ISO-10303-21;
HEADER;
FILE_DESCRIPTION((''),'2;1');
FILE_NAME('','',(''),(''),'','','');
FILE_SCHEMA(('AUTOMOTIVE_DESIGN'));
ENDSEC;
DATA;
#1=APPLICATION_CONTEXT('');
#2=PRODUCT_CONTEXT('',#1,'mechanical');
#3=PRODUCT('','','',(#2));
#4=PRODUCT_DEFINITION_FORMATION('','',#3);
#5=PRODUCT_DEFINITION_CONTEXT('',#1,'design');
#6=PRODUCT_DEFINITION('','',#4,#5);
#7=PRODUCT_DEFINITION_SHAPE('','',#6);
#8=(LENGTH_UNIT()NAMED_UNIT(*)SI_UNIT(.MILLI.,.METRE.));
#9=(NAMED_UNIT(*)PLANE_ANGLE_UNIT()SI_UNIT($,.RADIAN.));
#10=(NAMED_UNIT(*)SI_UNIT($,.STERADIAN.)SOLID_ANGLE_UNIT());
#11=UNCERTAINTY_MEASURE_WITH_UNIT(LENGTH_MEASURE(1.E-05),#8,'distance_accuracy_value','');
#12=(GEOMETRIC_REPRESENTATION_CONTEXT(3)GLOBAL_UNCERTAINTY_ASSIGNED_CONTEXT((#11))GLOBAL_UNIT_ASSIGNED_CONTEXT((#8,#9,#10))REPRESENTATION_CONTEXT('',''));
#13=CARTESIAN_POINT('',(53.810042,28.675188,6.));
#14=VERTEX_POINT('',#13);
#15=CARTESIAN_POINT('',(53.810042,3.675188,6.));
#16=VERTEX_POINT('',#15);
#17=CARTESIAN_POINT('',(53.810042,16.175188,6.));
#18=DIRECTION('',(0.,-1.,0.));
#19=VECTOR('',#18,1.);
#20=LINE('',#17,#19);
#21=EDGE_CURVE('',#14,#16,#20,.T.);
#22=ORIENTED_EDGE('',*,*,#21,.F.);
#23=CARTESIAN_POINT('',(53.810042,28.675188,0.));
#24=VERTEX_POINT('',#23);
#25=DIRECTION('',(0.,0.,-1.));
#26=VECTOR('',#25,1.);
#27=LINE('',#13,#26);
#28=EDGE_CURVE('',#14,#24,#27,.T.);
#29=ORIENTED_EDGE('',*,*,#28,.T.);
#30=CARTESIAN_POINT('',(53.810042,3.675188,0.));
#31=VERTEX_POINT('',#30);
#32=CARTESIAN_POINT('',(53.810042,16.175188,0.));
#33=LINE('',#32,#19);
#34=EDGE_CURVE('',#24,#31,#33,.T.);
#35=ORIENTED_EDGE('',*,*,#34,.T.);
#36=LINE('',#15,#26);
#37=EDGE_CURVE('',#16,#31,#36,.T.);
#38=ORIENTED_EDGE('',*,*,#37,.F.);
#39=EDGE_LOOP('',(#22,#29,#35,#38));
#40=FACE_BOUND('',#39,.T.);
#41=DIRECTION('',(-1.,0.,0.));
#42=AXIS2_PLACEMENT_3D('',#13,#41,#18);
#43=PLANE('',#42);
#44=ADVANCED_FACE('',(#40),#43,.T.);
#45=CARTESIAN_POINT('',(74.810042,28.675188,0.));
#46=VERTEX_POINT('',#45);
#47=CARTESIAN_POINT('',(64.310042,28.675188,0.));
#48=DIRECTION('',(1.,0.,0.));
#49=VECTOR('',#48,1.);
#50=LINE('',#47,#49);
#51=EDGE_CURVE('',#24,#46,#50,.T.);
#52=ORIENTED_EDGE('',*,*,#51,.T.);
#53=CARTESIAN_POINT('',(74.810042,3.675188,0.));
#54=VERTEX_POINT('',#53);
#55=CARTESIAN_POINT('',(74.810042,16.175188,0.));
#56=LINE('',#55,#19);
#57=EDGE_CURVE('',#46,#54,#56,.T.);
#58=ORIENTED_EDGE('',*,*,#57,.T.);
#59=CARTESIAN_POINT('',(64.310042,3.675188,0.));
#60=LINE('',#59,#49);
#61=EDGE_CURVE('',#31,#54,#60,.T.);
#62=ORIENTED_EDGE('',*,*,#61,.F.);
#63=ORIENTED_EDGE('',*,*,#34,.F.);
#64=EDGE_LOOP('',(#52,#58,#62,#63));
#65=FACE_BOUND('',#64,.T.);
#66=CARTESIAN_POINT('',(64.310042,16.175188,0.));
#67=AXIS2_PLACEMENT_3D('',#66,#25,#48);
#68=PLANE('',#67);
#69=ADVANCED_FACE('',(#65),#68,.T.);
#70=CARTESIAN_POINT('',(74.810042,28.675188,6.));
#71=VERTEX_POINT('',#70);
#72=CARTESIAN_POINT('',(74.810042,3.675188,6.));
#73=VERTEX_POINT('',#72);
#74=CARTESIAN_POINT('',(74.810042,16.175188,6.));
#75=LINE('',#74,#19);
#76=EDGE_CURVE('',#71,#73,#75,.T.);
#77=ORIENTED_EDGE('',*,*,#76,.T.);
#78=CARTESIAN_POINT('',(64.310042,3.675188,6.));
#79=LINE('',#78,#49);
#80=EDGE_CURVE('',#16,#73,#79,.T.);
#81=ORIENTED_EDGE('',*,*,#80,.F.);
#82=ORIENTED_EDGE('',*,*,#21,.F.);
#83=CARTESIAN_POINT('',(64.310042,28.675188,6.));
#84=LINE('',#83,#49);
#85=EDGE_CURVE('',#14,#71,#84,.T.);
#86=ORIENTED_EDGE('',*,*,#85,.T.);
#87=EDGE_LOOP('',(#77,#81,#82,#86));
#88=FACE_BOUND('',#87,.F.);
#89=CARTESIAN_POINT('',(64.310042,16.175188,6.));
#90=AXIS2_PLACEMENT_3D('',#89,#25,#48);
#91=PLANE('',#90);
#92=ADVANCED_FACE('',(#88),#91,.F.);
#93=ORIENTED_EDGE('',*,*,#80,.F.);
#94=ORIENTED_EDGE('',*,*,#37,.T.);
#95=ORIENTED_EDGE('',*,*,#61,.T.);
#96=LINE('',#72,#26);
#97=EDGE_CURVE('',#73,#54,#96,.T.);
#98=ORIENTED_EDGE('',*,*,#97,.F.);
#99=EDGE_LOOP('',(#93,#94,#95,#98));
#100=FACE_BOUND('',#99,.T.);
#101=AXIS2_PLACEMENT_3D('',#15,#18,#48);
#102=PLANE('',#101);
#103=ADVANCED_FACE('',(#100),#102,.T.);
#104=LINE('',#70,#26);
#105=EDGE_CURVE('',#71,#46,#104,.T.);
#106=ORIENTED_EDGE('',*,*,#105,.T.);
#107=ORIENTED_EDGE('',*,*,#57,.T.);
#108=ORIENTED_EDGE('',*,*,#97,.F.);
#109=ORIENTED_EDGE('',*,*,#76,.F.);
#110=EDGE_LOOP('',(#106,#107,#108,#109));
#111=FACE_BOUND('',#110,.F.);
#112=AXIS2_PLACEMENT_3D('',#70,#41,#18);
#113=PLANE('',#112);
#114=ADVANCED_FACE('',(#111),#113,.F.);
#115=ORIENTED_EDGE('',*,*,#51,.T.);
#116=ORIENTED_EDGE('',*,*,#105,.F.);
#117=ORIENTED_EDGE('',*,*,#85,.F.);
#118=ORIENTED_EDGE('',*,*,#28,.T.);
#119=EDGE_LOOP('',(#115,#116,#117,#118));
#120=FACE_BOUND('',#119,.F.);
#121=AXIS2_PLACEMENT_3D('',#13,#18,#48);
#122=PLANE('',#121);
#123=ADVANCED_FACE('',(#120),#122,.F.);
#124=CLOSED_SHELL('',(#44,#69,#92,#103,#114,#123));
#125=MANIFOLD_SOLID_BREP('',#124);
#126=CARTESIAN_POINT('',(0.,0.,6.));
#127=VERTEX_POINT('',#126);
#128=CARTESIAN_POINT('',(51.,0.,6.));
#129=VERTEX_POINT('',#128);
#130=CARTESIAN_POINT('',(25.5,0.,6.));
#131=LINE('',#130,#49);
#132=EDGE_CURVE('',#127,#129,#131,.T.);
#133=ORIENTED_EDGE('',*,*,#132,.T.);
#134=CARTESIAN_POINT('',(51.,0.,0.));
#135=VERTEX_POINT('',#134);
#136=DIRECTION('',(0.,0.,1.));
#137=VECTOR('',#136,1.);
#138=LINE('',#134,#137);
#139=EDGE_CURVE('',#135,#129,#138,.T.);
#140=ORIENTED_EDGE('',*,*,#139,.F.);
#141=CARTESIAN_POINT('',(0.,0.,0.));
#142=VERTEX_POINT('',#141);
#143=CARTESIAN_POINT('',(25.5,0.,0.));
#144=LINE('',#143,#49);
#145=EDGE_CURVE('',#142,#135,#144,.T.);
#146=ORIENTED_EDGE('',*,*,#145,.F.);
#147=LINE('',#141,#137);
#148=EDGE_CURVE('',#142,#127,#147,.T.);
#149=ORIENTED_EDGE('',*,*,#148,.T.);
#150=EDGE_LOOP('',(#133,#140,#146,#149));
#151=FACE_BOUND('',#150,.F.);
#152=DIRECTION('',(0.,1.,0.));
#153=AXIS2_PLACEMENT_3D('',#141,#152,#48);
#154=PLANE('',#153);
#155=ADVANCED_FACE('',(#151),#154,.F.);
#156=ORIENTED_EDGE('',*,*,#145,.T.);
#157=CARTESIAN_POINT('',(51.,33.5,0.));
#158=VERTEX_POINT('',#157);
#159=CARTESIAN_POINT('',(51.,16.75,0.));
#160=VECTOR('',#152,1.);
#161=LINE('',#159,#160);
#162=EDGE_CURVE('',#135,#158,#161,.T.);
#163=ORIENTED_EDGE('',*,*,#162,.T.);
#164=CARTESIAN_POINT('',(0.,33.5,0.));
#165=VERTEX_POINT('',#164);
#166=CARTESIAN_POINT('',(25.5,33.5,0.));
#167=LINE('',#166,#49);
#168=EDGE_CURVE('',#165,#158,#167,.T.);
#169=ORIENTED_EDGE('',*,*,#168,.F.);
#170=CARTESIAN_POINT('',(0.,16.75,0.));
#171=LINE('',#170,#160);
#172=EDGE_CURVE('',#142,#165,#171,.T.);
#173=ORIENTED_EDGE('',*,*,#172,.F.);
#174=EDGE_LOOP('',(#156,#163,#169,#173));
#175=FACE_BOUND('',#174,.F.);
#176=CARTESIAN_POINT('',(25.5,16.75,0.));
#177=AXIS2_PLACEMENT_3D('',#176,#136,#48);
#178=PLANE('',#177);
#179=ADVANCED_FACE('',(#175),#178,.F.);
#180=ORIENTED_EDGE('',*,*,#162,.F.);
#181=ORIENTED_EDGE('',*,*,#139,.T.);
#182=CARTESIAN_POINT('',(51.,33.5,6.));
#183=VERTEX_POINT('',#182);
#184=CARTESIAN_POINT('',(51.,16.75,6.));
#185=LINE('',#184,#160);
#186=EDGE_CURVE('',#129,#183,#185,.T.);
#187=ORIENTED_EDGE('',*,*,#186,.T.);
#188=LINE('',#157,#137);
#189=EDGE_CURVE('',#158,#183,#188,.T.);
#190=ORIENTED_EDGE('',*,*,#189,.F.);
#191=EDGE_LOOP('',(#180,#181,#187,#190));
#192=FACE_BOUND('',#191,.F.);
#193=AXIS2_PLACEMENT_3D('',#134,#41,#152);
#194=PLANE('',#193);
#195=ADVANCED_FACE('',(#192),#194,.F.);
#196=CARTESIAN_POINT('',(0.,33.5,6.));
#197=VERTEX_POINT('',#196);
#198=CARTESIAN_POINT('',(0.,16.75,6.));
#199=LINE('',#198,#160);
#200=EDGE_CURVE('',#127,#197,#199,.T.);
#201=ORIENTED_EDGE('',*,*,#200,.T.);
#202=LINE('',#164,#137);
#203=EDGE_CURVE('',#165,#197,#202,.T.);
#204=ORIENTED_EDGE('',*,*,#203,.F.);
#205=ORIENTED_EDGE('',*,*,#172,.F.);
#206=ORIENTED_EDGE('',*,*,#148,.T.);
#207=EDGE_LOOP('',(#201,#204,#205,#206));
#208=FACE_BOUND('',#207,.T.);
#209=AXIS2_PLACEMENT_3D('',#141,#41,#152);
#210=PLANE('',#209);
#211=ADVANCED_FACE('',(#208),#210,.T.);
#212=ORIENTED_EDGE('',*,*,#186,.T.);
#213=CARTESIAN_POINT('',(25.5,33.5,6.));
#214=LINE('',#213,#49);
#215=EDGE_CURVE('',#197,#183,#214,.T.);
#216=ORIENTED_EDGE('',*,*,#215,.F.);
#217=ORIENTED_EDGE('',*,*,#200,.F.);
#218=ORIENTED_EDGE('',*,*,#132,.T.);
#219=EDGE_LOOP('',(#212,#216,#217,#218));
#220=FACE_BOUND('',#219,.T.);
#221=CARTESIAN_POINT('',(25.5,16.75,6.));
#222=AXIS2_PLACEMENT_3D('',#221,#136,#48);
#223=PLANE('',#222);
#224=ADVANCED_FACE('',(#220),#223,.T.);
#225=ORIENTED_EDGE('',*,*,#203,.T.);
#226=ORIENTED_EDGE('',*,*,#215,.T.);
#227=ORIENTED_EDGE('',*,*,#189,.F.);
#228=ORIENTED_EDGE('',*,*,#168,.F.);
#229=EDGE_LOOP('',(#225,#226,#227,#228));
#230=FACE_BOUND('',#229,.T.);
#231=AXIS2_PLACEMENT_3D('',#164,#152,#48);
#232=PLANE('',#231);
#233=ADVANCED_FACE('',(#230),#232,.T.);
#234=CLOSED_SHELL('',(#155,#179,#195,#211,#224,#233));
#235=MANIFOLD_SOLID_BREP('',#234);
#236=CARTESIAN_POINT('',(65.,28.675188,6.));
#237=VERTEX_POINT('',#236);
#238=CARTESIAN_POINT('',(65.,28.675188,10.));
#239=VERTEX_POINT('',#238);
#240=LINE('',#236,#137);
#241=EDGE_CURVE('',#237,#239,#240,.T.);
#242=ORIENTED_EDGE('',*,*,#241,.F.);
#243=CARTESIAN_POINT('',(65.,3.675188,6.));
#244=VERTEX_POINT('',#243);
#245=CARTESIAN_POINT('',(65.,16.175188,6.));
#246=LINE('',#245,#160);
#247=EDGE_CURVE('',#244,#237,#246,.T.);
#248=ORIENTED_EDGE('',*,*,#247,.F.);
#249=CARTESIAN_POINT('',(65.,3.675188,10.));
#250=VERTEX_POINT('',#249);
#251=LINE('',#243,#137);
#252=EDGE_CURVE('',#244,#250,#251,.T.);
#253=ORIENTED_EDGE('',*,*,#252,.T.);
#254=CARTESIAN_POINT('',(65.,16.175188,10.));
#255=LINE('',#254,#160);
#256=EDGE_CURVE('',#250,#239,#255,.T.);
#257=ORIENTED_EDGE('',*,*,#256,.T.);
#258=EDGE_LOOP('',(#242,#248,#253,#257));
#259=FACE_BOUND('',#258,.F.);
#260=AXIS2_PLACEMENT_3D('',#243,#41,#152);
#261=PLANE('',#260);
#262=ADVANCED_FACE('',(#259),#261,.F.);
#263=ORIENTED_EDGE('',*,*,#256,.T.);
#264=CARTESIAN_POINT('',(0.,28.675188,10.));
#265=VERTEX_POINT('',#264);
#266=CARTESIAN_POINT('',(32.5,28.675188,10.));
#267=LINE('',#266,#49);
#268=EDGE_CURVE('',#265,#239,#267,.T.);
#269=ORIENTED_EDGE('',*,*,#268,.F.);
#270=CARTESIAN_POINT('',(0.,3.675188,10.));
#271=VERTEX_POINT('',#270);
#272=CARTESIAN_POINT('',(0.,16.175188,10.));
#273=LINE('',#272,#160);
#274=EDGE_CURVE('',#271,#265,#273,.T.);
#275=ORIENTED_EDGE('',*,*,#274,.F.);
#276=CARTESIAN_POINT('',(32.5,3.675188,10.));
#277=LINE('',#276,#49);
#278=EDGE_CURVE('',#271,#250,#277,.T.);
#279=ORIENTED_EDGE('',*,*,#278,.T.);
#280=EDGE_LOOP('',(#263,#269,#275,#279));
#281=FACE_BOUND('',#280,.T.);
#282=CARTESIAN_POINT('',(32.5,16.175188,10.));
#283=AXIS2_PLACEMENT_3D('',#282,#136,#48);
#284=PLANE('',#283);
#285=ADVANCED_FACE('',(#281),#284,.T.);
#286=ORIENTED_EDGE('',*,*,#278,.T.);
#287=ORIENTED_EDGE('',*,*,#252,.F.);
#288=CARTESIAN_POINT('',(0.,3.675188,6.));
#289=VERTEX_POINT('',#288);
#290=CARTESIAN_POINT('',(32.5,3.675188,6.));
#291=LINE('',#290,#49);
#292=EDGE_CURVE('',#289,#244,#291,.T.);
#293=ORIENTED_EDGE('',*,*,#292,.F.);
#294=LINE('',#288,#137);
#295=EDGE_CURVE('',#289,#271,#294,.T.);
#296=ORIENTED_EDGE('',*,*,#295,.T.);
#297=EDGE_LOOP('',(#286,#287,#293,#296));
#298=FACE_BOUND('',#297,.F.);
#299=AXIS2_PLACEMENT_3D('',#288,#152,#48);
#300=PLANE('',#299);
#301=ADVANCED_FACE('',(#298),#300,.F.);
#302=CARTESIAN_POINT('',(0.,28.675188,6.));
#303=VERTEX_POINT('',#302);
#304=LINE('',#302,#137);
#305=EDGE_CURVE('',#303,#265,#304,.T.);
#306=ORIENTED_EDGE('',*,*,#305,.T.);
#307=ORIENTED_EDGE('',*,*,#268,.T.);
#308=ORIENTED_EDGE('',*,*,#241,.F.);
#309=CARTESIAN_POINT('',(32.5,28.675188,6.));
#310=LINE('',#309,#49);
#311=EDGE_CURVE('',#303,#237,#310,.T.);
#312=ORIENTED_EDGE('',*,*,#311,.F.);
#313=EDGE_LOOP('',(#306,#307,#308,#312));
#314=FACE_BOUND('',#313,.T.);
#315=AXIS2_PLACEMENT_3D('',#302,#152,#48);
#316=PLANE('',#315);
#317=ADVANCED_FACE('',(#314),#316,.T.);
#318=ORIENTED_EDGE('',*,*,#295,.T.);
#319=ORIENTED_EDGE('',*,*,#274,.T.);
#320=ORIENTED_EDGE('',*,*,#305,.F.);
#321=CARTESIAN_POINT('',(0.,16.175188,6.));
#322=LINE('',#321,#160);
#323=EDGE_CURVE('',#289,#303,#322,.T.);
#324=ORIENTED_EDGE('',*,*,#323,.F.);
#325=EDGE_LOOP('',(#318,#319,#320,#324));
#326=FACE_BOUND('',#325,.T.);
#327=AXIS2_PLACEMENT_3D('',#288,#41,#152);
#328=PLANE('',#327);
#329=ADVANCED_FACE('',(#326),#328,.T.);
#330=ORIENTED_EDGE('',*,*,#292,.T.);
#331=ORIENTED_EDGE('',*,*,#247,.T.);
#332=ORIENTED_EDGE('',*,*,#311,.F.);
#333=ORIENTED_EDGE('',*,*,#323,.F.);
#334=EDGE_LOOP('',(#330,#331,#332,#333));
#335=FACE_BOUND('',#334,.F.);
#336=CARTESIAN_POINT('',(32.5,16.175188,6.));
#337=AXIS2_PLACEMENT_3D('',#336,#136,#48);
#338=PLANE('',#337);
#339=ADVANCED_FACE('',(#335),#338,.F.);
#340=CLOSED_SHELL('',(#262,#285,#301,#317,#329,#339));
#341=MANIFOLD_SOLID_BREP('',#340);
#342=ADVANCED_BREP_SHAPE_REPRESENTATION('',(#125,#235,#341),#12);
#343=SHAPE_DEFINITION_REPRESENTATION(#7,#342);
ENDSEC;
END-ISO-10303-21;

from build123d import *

# Parameters (mm, degrees)
F0_W     = 51
F0_H     = 33.5
F1_DEPTH = 6
F2_W     = 65
F2_H     = 25
F3_DEPTH = 4
F4_W     = 21
F4_H     = 25
F5_DEPTH = 6


# Not quite as in the source:
# - a feature names something its author has since deleted; it is built from what else it names


with BuildPart() as f1:
    # F0 (on Top) → F1 (new body)
    with BuildSketch(Plane.XY):
        with Locations((25.5, 16.75)):
            Rectangle(F0_W, F0_H)
    extrude(amount=F1_DEPTH)


with BuildPart() as f3:
    # F2 (on face) → F3 (new body)
    with BuildSketch(Plane.XY.offset(6)):
        with Locations((32.5, 16.1751881707)):
            Rectangle(F2_W, F2_H)
    extrude(amount=F3_DEPTH)


with BuildPart() as f5:
    # F4 (on face) → F5 (new body)
    with BuildSketch(Plane(origin=(0, 0, 6), x_dir=(1, 0, 0), z_dir=(0, 0, -1))):
        with Locations((64.3100422634, -16.1751881707)):
            Rectangle(F4_W, F4_H)
    extrude(amount=F5_DEPTH)


solid = Compound([f1.part, f3.part, f5.part])
